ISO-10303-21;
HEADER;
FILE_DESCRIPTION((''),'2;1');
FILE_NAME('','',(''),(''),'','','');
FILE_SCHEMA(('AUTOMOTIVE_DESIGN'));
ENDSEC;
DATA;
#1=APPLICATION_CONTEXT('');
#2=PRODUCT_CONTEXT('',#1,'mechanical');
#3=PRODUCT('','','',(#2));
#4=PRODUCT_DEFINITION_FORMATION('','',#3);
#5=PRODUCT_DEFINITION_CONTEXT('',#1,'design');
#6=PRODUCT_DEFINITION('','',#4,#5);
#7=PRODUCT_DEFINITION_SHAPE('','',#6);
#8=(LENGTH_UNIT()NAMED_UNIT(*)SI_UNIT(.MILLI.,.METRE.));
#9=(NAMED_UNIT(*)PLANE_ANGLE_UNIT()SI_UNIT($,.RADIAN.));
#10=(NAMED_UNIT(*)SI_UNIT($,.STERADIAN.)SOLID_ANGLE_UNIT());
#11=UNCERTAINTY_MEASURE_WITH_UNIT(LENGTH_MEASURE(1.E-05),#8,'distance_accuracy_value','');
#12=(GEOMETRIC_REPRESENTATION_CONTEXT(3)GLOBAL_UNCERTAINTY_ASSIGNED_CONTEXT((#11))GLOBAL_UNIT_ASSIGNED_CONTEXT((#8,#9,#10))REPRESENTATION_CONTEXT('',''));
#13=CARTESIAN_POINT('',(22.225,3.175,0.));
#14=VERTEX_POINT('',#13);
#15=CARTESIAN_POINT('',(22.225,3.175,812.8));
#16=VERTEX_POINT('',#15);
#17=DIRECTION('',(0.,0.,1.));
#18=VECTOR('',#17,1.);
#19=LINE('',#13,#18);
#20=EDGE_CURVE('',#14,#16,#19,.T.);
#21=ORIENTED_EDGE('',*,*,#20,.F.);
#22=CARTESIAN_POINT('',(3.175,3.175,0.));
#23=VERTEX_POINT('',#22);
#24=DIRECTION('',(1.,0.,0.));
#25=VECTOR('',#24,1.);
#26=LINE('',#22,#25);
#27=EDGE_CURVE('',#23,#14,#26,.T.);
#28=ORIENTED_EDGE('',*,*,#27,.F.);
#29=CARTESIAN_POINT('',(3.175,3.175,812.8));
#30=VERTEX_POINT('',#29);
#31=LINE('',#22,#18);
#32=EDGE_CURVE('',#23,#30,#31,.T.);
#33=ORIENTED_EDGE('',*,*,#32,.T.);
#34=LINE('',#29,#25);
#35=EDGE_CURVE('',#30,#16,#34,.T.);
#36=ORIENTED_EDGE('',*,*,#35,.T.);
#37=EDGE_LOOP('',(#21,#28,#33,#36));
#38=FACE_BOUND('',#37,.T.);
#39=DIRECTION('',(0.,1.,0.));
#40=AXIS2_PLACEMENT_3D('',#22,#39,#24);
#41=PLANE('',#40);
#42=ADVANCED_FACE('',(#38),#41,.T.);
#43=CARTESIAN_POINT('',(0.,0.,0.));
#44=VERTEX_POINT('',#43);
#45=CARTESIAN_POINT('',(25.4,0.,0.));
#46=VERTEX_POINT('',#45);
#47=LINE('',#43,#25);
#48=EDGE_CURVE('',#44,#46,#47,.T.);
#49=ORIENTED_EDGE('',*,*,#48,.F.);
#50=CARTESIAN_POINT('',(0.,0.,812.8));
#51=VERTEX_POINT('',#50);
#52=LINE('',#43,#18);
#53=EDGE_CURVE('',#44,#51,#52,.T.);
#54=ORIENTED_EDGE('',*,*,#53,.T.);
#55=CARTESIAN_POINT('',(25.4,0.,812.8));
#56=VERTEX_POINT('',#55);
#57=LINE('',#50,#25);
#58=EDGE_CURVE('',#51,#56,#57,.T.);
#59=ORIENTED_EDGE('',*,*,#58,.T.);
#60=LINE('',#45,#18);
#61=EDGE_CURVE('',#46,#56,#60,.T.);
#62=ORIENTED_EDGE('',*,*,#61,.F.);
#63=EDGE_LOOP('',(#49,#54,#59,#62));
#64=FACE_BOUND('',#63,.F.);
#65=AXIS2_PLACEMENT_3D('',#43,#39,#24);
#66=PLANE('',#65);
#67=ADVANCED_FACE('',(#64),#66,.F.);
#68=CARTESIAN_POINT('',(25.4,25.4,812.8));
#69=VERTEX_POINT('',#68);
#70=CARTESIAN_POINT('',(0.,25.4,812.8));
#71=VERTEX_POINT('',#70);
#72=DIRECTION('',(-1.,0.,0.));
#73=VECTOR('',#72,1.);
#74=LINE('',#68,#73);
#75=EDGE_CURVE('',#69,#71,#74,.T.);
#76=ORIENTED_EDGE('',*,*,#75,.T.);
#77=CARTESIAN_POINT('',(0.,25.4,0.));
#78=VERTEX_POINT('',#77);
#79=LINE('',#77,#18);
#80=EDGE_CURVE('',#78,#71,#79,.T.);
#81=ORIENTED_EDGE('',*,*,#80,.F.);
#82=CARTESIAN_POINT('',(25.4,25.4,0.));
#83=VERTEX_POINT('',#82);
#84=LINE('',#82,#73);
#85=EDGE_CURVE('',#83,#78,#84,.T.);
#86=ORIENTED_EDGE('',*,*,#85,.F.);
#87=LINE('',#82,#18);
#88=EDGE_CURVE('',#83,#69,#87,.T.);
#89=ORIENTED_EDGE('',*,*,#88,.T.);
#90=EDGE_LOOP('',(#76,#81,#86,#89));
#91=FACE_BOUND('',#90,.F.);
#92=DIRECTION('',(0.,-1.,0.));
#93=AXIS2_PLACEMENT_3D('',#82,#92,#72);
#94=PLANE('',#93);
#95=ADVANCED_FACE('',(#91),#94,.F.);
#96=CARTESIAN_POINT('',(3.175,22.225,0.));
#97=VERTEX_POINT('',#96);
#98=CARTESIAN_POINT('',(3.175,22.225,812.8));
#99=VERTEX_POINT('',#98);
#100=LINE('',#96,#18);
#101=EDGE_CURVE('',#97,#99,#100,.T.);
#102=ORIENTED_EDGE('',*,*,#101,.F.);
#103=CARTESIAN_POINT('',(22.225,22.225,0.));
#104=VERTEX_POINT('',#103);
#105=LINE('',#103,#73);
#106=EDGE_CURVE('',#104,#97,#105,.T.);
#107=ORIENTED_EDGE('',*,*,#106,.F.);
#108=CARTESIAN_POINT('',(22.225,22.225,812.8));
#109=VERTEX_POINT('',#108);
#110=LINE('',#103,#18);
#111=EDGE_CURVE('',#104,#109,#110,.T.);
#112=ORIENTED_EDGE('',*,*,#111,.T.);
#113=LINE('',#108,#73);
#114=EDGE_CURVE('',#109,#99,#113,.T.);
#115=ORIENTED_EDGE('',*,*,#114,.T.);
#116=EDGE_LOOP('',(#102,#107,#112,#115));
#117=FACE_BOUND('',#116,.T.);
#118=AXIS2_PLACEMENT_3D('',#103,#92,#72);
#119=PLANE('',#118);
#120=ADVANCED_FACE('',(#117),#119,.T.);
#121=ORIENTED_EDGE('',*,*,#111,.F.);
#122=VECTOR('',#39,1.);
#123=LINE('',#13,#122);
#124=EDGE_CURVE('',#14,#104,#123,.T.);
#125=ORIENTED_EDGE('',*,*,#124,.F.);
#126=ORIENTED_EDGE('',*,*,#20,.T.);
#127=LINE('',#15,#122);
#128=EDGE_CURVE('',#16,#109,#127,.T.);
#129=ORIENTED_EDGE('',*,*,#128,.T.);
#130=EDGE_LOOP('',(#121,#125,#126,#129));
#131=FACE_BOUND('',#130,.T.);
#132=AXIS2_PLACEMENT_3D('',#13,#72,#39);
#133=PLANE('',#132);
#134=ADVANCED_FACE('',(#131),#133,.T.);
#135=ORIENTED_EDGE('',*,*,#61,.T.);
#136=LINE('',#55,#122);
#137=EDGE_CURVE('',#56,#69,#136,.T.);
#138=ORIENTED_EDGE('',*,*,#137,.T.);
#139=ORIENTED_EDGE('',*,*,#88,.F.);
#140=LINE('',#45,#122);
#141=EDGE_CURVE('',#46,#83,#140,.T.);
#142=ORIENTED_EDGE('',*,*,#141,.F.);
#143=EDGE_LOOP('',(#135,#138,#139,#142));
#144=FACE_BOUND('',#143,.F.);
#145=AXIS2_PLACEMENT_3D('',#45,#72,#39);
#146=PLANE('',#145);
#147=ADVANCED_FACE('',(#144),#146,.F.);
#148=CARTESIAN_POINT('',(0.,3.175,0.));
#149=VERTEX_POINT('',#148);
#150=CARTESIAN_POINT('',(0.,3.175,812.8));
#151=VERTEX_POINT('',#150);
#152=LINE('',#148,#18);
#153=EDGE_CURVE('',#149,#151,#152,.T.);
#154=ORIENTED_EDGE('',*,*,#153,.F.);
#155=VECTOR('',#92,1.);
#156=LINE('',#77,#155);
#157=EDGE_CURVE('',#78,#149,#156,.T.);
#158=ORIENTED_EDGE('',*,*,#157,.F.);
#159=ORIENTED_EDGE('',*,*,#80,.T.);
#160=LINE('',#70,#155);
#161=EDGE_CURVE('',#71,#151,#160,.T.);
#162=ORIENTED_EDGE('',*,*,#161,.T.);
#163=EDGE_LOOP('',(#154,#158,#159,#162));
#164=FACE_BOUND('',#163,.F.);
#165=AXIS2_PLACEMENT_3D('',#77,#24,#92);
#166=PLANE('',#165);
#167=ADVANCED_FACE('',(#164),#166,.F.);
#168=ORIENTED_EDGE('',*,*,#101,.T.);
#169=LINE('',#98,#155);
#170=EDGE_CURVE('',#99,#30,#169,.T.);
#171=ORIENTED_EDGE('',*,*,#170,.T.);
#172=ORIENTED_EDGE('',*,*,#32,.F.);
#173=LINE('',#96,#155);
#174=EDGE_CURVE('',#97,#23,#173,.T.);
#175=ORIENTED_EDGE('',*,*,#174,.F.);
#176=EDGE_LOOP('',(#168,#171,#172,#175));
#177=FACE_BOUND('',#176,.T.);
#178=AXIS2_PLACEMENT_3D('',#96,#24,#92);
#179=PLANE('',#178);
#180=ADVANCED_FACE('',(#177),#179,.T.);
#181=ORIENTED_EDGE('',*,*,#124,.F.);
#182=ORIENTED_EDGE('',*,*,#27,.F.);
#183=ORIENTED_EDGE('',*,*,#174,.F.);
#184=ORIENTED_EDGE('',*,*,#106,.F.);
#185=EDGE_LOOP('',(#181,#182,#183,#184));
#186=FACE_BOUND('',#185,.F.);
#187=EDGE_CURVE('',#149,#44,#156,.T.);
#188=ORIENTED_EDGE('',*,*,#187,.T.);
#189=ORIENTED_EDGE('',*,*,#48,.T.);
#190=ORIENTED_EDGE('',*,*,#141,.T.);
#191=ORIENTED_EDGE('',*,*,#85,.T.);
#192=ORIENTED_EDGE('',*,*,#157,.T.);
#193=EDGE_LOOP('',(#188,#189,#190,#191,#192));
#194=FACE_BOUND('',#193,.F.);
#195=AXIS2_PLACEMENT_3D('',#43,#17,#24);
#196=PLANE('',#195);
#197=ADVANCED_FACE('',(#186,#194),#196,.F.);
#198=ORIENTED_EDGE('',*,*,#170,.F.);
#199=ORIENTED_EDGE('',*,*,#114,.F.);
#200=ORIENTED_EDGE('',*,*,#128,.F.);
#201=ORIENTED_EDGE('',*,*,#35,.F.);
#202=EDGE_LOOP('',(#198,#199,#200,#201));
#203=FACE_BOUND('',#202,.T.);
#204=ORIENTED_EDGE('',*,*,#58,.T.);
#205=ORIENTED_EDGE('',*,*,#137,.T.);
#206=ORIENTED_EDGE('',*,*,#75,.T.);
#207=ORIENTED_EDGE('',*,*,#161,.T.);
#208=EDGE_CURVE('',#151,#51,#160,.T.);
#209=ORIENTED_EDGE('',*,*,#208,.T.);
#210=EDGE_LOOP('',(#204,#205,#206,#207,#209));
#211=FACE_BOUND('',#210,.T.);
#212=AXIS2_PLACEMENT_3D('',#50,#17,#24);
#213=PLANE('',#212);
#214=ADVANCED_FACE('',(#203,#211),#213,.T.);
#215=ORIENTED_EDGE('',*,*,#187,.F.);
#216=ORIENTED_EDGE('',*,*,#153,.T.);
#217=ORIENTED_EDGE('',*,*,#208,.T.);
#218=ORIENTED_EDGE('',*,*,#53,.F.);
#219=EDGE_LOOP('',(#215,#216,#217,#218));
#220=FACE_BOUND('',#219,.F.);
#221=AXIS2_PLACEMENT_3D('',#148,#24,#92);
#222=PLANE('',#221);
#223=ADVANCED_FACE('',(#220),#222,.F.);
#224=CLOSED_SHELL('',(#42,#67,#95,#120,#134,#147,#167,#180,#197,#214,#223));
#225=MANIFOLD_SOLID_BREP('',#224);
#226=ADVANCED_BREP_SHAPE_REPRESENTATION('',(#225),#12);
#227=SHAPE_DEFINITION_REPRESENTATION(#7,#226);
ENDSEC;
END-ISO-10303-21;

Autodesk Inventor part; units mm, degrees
ref_plane "YZ Plane" through (0, 0, 0) normal (1, 0, 0) x (0, 1, 0)
ref_plane "XZ Plane" through (0, 0, 0) normal (0, 1, 0) x (-1, 0, 0)
ref_plane "XY Plane" through (0, 0, 0) normal (0, 0, 1) x (1, 0, 0)
sketch "Sketch1" plane through (0, 0, 0) normal (0, 0, 1) x (1, 0, 0)
  line L0 (0, 0) -> (25.4, 0)
  line L1 (25.4, 0) -> (25.4, 25.4)
  line L2 (25.4, 25.4) -> (0, 25.4)
  line L3 (0, 25.4) -> (0, 0)
  line L4 (0, 0) -> (0, 3.175)
  line L5 (0, 3.175) -> (3.175, 3.175)
  line L6 (3.175, 3.175) -> (22.225, 3.175)
  line L7 (22.225, 3.175) -> (22.225, 22.225)
  line L8 (22.225, 22.225) -> (3.175, 22.225)
  line L9 (3.175, 22.225) -> (3.175, 3.175)
  dimension "d0" = 25.4
  dimension "d1" = 25.4
  dimension "d2" = 3.175
  dimension "d3" = 3.175
  dimension "d4" = 19.05
  dimension "d5" = 19.05
extrude "Extrusion1" add sketch "Sketch1" along normal blind 812.8
properties part number "32inSquarePipe"
